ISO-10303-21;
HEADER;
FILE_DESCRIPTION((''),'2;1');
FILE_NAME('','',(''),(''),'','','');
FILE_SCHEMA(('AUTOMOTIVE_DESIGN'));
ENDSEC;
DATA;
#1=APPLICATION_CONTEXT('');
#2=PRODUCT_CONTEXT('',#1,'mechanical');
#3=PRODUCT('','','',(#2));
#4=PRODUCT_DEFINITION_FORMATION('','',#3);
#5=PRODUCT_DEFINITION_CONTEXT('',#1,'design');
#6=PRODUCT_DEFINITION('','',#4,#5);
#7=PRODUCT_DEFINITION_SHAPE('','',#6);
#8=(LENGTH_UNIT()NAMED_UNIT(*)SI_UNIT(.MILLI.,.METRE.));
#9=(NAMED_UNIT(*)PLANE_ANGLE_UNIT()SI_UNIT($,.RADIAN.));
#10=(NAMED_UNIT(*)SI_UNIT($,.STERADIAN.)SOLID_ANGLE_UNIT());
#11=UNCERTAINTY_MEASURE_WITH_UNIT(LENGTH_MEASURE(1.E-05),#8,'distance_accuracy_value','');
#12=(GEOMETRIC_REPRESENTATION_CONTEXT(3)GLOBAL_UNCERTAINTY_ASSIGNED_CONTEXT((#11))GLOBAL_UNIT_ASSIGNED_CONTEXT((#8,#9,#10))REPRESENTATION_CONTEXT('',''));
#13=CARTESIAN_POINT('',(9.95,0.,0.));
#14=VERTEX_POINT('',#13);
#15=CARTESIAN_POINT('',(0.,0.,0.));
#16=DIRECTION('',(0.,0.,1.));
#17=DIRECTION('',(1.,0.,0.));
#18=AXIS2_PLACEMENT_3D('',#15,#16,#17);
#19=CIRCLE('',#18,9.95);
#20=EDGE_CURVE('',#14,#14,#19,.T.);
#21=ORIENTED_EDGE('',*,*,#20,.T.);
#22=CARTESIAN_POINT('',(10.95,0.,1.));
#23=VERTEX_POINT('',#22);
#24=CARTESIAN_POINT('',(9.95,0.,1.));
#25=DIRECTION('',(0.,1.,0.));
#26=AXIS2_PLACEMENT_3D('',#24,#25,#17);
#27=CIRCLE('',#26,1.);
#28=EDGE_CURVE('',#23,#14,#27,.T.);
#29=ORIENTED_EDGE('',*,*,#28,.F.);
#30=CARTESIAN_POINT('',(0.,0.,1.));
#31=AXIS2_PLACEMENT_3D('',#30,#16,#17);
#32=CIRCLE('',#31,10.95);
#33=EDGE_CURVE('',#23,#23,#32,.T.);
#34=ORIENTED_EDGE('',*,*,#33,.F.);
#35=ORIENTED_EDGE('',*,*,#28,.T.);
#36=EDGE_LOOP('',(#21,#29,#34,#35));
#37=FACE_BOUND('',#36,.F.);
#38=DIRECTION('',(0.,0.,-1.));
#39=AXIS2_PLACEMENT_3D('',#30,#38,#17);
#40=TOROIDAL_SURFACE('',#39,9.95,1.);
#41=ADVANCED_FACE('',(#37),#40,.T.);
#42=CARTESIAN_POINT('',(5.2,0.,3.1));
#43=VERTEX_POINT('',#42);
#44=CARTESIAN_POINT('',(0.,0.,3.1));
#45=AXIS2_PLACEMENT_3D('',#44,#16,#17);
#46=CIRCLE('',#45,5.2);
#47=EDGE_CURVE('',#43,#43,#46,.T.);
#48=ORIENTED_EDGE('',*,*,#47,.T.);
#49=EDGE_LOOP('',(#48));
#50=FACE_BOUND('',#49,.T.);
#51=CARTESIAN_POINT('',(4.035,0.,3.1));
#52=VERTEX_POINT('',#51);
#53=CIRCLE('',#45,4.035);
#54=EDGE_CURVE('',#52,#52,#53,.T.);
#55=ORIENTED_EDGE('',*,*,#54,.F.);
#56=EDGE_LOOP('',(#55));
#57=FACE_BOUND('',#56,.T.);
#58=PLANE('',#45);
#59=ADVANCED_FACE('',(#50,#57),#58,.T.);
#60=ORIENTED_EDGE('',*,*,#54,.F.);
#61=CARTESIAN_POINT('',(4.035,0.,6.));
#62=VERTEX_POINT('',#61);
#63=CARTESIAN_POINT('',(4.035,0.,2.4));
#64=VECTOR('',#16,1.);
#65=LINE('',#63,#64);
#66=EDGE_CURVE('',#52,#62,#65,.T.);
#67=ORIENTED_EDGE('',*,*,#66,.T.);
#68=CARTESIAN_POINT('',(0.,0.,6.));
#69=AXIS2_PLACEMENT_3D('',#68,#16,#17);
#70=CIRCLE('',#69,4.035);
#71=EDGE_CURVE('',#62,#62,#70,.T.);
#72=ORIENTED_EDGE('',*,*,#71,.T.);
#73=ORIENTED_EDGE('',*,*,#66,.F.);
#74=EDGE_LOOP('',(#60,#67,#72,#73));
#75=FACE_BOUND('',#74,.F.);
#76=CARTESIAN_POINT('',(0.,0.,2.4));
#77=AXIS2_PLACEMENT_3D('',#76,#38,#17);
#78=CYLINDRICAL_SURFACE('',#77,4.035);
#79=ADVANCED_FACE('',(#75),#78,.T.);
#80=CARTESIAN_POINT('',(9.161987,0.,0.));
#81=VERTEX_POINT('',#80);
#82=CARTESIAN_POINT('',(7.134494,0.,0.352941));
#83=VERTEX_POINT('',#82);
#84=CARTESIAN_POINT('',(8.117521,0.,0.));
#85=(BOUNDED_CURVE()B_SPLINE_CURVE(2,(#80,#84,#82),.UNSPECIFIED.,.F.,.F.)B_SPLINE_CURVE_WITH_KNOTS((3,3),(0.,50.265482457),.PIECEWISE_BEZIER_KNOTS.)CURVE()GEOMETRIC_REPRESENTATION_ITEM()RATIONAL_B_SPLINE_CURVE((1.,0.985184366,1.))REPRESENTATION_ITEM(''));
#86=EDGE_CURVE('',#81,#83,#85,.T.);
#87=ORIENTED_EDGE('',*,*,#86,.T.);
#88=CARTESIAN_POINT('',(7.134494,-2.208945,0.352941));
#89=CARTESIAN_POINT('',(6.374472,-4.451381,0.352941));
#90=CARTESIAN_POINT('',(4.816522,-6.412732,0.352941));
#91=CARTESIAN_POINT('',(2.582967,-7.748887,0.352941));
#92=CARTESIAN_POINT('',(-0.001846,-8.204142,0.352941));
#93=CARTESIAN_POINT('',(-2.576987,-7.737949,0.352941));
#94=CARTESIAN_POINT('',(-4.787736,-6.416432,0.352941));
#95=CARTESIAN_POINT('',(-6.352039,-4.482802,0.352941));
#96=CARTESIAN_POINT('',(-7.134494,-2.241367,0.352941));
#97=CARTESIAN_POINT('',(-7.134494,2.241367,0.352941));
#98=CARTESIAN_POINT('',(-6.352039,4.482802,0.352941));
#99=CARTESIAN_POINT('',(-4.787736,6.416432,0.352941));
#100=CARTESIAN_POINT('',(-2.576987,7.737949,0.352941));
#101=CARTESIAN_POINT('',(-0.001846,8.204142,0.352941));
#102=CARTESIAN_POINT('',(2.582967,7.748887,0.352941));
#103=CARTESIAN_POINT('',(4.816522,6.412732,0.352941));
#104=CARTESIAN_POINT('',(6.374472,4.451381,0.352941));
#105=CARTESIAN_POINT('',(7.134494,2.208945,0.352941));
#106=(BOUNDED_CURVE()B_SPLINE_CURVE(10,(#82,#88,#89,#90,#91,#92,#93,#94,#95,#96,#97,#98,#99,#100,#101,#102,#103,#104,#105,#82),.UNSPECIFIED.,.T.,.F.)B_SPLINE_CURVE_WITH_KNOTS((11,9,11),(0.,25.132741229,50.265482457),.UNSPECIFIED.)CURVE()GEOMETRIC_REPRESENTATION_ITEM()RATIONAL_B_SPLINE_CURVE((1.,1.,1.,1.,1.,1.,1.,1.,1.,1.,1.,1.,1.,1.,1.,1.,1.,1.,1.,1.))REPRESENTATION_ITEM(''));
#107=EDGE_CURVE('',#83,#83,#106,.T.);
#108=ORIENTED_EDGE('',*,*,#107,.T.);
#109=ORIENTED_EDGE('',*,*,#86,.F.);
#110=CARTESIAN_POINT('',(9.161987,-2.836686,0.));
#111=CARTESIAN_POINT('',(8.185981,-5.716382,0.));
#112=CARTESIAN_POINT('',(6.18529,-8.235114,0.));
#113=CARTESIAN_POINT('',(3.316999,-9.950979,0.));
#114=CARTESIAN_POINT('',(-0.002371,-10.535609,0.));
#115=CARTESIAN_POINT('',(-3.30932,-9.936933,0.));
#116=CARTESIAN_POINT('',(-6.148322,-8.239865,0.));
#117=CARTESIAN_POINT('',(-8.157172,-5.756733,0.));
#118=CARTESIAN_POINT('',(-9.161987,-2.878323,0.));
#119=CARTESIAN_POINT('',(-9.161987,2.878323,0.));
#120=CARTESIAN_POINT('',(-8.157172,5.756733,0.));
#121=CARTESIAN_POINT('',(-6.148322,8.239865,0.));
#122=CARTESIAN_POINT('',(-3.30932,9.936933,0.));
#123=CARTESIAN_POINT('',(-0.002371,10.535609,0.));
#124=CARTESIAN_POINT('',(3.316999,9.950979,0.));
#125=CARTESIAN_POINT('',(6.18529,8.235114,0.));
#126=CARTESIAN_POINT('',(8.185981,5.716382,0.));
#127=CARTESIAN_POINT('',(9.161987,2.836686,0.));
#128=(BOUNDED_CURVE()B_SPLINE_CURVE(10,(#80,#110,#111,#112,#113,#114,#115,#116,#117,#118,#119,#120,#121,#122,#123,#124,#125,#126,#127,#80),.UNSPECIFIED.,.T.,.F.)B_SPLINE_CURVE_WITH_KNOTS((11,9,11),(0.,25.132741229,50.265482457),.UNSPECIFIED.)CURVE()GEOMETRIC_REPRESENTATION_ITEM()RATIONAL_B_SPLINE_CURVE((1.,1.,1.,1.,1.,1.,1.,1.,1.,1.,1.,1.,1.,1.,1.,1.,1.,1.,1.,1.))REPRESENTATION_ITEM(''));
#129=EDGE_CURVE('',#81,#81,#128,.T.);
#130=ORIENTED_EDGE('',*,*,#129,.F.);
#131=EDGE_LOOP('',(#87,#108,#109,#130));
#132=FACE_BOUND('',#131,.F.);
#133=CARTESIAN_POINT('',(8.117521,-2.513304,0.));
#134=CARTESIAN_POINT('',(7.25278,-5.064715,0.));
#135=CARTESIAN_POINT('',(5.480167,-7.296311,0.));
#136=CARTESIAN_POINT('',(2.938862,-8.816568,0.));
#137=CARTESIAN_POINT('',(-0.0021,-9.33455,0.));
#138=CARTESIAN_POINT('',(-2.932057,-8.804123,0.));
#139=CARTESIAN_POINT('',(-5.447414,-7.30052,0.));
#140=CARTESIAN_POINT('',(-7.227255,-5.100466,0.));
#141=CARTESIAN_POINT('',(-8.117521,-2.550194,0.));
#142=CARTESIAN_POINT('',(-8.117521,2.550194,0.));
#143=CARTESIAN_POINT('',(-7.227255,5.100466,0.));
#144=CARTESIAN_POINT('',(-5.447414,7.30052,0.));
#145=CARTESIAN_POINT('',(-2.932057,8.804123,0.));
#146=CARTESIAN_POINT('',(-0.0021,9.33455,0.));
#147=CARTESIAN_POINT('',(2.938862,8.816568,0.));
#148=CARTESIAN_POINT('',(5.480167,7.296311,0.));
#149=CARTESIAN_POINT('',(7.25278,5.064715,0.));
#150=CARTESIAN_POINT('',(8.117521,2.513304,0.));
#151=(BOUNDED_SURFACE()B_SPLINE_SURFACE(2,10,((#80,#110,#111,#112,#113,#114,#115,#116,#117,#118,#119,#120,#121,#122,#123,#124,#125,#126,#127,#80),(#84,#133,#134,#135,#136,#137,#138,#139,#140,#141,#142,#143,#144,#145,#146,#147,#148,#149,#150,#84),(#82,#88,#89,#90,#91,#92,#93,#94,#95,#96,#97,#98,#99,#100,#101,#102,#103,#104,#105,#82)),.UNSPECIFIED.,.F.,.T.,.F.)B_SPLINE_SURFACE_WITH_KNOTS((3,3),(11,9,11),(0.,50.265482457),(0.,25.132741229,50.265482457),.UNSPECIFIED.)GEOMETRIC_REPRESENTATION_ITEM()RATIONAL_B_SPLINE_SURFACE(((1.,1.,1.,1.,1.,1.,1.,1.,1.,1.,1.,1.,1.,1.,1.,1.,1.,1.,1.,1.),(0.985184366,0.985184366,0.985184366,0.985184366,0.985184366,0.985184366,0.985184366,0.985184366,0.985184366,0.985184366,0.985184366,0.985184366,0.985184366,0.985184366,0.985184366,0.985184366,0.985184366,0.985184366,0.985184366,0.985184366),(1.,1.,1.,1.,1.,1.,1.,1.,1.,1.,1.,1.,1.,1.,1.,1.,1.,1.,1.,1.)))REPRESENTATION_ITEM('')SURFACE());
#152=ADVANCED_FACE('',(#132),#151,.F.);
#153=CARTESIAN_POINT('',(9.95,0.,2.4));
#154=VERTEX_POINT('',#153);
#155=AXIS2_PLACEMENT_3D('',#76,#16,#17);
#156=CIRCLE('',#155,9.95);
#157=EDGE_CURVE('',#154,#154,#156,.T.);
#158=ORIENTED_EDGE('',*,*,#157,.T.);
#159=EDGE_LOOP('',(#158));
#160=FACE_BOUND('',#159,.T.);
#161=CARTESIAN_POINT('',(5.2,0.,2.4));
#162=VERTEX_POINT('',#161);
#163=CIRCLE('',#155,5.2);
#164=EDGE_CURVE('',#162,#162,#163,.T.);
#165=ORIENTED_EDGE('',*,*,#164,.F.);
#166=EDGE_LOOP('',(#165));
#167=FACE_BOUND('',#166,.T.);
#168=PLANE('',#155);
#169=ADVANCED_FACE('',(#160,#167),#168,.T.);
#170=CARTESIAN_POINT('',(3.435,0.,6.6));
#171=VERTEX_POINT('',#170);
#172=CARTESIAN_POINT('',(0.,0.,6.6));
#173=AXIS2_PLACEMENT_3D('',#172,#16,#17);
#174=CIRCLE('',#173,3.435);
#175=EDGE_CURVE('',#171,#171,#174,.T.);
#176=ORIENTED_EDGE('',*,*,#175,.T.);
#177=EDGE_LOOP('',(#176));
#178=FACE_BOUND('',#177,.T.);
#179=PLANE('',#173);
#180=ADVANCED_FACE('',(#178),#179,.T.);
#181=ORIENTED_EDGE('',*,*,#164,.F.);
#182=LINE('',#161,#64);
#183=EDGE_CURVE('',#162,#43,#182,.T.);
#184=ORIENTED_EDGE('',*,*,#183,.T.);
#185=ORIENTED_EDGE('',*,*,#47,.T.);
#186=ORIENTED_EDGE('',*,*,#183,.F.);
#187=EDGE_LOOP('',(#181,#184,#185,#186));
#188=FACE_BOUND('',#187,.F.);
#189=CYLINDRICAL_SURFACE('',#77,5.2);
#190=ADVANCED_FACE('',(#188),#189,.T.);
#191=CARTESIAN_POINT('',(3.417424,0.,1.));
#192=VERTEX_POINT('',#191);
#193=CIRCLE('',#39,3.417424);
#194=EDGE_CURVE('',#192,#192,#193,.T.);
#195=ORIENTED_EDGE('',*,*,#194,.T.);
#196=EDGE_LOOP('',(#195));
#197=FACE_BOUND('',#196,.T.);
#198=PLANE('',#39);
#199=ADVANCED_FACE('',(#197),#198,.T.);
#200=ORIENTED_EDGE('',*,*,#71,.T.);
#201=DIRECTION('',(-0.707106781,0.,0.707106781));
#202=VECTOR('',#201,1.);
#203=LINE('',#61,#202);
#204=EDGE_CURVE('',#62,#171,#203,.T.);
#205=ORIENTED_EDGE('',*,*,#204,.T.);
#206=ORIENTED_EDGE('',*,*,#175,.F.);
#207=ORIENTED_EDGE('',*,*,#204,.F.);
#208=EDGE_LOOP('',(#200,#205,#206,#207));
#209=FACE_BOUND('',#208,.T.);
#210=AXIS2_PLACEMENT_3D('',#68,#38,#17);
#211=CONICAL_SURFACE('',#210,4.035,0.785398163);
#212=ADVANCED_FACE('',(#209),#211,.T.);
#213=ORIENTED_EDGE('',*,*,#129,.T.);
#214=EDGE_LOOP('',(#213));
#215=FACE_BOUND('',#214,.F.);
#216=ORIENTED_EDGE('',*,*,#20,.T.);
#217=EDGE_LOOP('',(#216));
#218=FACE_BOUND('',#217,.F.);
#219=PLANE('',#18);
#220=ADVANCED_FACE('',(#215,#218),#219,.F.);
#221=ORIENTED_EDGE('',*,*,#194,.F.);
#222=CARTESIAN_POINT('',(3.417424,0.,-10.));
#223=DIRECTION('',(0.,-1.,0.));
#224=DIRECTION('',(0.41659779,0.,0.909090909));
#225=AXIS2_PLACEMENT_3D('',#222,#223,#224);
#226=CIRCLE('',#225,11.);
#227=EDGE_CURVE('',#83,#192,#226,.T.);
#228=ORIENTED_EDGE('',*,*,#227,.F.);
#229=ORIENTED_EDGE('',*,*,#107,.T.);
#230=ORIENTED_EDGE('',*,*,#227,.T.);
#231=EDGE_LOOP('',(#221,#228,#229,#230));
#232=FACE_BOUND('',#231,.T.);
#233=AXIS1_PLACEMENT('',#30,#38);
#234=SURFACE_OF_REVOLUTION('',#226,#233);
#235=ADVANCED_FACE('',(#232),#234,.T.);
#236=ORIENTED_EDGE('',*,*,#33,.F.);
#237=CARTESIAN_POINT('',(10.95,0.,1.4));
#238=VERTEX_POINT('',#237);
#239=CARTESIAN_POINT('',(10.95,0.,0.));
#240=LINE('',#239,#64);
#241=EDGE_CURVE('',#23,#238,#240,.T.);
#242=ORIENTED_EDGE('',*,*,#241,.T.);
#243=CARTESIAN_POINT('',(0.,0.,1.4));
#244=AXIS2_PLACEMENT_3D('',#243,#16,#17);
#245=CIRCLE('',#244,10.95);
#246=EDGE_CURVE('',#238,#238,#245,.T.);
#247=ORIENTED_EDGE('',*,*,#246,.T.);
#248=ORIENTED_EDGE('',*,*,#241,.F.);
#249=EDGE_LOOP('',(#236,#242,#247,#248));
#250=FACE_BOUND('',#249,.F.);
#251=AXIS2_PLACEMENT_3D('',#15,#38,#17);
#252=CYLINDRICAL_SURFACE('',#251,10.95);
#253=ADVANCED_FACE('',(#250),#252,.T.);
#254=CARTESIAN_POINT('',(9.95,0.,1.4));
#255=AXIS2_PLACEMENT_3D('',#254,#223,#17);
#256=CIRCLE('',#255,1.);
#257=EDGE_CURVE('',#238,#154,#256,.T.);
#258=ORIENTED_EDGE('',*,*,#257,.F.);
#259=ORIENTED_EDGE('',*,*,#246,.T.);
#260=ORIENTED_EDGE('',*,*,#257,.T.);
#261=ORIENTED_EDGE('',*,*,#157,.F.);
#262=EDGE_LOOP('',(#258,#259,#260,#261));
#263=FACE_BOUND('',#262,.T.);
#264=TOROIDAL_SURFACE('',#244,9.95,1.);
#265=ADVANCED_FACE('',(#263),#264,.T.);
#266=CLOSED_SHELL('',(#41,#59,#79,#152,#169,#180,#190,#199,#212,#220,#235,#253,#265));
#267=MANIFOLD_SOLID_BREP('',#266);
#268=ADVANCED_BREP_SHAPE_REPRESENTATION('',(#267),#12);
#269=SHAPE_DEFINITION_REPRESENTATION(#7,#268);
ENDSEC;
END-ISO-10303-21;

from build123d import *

# Parameters (mm, degrees)
F0_R     = 10.95
F1_DEPTH = 2.4
F2_R     = 4.035
F3_DEPTH = 4.2
F4_R     = 1
F5_R     = 5.2
F5_R_2   = 4.035
F6_DEPTH = 0.7
F7_R     = 1
F8_R     = 8
F9_DEPTH = 1
F11_SIZE = 0.6
F12_R    = 6


# Not quite as in the source:
# - a fillet or chamfer that OpenCascade refuses, or shapes differently, is made with other operations: its cross-section is extruded or revolved along the edge and cut away or added


with BuildPart() as f1:
    # F0 (on Top) → F1 (new body)
    with BuildSketch(Plane.XY):
        Circle(F0_R)
    extrude(amount=F1_DEPTH)

    # F2 (on face) → F3 (join)
    with BuildSketch(Plane.XY.offset(2.4)):
        Circle(F2_R)
    extrude(amount=F3_DEPTH)

    # F4
    f4_edges = [f1.edges().sort_by_distance(p)[0] for p in [
        (-10.95, 0, 2.4),
    ]]
    fillet(f4_edges, radius=F4_R)

    # F5 (on face) → F6 (join)
    with BuildSketch(Plane.XY.offset(2.4)):
        Circle(F5_R)
        Circle(F5_R_2, mode=Mode.SUBTRACT)
    extrude(amount=F6_DEPTH)

    # F7
    f7_edges = [f1.edges().sort_by_distance(p)[0] for p in [
        (-10.95, 0, 0),
    ]]
    fillet(f7_edges, radius=F7_R)

    # F8 (on face) → F9 (cut)
    with BuildSketch(Plane(origin=(0, 0, 0), x_dir=(1, 0, 0), z_dir=(0, 0, -1))):
        Circle(F8_R)
    extrude(amount=-F9_DEPTH, mode=Mode.SUBTRACT)

    # F10: fillet of radius 11 on 1 edges, made by hand

    # F10_s1 → F10_t2 (revolve)
    with BuildSketch(Plane.XZ):
        with BuildLine():
            ThreePointArc((8, 0), (5.762632185, 0.7470926301), (3.417424305, 1))
            Line((3.417424305, 1), (8, 1))
            Line((8, 1), (8, 0))
        make_face()
    revolve(axis=Axis((0, 0, 1), (0, 0, -1)))

    # F11
    f11_edges = [f1.edges().sort_by_distance(p)[0] for p in [
        (-4.035, 0, 6.6),
    ]]
    chamfer(f11_edges, length=F11_SIZE)

    # F12
    f12_edges = [f1.edges().sort_by_distance(p)[0] for p in [
        (-8, 0, 0),
    ]]
    fillet(f12_edges, radius=F12_R)


solid = f1.part
